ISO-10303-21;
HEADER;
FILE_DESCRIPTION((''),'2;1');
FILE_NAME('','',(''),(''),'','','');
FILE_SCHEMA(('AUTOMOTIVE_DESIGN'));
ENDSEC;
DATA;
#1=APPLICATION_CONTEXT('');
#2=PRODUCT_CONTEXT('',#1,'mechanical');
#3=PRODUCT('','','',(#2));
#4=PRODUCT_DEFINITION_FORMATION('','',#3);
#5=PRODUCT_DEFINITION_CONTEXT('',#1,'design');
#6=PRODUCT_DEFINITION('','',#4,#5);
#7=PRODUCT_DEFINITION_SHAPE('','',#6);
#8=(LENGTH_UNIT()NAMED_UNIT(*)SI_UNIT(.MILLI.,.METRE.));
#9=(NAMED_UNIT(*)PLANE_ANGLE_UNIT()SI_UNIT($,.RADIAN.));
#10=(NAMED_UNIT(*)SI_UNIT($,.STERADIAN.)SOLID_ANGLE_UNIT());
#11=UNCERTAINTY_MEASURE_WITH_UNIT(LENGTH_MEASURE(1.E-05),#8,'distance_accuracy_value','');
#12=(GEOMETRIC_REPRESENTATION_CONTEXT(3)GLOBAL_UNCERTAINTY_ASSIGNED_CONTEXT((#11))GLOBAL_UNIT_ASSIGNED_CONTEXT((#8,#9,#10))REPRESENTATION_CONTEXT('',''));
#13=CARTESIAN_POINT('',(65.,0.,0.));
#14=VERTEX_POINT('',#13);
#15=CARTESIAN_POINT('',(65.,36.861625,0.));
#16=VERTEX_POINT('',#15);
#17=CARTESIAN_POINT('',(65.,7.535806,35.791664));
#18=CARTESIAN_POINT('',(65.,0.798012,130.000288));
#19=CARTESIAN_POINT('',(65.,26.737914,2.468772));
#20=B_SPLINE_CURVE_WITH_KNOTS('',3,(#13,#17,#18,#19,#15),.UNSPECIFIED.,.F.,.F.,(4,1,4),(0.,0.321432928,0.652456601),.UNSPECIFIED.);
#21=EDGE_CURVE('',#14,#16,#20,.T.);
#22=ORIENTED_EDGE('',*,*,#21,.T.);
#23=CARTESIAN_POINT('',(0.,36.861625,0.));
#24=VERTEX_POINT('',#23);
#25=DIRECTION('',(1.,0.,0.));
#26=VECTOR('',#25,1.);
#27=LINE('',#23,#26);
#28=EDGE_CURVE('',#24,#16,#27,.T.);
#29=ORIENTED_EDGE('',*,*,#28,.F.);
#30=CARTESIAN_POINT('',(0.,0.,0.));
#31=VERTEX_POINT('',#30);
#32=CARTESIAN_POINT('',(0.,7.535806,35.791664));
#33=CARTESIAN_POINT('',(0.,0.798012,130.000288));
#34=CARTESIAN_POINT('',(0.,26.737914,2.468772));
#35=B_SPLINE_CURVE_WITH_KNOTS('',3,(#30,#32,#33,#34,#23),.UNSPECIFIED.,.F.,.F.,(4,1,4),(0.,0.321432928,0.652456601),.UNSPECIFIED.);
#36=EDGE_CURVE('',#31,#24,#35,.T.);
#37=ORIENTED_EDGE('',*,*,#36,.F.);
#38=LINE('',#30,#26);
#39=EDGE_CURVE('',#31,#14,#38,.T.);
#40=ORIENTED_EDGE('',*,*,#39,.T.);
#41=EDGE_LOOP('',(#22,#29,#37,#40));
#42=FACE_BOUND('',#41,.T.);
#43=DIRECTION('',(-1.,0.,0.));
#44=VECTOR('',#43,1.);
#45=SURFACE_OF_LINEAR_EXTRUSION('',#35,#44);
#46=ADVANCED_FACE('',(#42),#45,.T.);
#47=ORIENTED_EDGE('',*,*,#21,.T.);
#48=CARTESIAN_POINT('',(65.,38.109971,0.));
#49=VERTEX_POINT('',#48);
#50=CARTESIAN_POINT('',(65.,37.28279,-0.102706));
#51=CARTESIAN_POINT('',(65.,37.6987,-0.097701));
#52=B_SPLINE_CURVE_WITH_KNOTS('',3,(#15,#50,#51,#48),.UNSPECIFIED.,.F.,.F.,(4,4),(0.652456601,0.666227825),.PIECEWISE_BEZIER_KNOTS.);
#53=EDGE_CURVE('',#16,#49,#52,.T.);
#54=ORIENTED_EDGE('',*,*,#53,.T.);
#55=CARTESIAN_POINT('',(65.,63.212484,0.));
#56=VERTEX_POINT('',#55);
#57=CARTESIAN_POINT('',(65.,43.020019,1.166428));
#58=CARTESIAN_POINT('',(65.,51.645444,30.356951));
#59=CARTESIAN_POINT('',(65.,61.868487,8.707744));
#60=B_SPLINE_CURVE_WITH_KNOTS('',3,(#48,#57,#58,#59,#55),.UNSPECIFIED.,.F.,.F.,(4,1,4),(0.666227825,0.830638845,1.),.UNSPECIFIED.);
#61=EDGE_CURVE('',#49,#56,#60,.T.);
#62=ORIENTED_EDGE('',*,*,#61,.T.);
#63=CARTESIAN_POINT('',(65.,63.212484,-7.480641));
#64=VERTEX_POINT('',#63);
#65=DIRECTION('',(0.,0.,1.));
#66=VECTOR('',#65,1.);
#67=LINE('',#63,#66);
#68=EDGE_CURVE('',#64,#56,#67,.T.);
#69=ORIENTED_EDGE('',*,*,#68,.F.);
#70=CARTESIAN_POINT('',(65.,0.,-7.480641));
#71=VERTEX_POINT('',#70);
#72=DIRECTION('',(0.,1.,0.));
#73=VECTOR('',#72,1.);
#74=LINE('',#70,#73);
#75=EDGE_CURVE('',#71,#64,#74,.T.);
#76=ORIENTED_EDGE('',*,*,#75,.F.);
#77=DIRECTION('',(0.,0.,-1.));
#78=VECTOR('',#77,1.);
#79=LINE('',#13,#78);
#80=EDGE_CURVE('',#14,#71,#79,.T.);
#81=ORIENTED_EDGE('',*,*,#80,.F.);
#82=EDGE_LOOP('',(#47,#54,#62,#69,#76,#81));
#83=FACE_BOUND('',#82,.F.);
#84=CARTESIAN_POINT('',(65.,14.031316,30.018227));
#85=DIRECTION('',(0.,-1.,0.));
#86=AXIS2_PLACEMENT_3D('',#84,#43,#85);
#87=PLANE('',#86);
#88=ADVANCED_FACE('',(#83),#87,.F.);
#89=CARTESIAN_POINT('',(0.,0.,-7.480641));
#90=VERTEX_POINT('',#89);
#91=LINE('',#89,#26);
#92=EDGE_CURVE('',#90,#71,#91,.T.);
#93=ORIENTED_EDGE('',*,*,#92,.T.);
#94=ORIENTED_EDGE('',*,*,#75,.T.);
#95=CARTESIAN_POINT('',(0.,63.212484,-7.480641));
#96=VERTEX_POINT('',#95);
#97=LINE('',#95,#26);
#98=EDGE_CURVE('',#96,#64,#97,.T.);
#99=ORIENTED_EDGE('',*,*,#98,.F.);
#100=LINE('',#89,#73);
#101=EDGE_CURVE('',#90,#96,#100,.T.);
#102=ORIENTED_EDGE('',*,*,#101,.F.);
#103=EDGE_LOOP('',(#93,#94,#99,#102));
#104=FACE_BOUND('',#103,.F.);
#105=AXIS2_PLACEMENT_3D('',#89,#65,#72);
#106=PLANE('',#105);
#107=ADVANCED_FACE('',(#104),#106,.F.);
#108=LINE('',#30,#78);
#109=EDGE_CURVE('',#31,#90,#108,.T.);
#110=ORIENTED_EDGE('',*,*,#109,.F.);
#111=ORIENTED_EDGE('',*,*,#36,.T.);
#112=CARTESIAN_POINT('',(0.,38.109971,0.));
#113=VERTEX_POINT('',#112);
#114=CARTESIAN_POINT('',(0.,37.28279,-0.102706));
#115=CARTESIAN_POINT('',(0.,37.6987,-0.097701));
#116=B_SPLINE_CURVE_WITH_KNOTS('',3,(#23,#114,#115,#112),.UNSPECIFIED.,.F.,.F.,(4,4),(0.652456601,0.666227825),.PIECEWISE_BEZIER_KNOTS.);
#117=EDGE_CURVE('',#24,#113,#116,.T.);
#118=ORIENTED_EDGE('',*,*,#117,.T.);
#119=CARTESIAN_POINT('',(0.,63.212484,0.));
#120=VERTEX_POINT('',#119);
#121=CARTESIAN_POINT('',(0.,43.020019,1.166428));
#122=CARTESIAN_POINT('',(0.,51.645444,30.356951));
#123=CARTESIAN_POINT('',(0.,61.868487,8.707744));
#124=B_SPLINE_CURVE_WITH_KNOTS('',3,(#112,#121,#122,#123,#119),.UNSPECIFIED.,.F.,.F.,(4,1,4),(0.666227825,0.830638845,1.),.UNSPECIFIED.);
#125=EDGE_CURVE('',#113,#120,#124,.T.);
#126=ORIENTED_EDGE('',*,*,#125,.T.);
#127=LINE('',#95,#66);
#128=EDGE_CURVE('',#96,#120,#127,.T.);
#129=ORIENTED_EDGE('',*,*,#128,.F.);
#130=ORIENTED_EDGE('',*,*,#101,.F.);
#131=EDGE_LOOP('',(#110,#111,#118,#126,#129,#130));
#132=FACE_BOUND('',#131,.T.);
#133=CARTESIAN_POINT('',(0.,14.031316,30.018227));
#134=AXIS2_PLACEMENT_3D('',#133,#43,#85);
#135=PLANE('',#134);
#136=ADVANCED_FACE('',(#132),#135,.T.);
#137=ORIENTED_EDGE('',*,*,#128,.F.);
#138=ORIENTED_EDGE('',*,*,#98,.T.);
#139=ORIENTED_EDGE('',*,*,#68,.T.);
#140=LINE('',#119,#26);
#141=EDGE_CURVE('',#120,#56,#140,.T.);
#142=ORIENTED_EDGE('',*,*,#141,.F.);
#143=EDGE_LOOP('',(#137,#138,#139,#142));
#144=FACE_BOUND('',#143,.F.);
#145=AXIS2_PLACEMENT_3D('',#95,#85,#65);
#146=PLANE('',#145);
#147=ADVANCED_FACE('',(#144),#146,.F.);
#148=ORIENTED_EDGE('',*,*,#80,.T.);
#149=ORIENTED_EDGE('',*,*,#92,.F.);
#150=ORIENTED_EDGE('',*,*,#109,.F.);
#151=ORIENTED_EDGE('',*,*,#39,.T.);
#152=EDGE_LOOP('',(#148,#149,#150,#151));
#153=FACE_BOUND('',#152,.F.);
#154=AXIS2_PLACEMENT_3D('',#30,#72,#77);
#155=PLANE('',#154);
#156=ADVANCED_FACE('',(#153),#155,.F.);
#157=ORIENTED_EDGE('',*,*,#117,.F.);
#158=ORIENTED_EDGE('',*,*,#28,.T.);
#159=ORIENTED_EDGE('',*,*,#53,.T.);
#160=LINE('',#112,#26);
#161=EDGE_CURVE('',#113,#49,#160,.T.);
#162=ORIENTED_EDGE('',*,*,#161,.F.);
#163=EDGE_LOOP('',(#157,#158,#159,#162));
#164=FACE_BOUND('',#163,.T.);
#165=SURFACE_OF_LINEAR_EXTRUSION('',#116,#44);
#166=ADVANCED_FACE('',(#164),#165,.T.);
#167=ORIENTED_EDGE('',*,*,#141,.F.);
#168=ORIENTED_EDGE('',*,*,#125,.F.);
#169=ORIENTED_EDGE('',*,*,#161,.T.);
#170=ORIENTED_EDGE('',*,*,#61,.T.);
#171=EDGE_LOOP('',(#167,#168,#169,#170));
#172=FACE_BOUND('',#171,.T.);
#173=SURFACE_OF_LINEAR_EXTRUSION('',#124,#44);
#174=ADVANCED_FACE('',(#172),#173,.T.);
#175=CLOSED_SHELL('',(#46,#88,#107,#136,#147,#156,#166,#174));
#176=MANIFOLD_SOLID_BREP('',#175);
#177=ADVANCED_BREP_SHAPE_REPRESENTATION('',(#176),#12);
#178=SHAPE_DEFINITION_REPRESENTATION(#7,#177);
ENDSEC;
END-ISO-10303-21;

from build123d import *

# Parameters (mm, degrees)
F1_DEPTH = 65


with BuildPart() as f1:
    # F0 (on Right) → F1 (new body)
    with BuildSketch(Plane.YZ):
        with BuildLine():
            add(Edge.make_bspline(
                [(0, 0), (7.535805658, 35.7916641323), (0.7980118824, 130.0002884959), (26.7379139246, 2.4687719644), (36.8616245687, 0)],
                knots=[0, 0, 0, 0, 0.3214329284, 0.6524566012, 0.6524566012, 0.6524566012, 0.6524566012], degree=3))
            Line((0, 0), (36.8616245687, 0))
        make_face()
        with BuildLine():
            Line((36.8616245687, 0), (0, 0))
            Line((0, 0), (0, -7.4806414777))
            Line((0, -7.4806414777), (63.2124841213, -7.4806414777))
            Line((63.2124841213, -7.4806414777), (63.2124841213, 0))
            Line((63.2124841213, 0), (38.1099706596, 0))
            add(Edge.make_bspline(
                [(36.8616245687, 0), (37.2827904695, -0.1027056783), (37.6987003599, -0.097701161), (38.1099706596, 0)],
                knots=[0.6524566012, 0.6524566012, 0.6524566012, 0.6524566012, 0.6662278249, 0.6662278249, 0.6662278249, 0.6662278249], degree=3))
        make_face()
        with BuildLine():
            add(Edge.make_bspline(
                [(38.1099706596, 0), (43.0200186963, 1.1664284879), (51.645443653, 30.3569507717), (61.8684866833, 8.7077435887), (63.2124841213, 0)],
                knots=[0.6662278249, 0.6662278249, 0.6662278249, 0.6662278249, 0.8306388452, 1, 1, 1, 1], degree=3))
            Line((38.1099706596, 0), (63.2124841213, 0))
        make_face()
    extrude(amount=F1_DEPTH)


solid = f1.part
